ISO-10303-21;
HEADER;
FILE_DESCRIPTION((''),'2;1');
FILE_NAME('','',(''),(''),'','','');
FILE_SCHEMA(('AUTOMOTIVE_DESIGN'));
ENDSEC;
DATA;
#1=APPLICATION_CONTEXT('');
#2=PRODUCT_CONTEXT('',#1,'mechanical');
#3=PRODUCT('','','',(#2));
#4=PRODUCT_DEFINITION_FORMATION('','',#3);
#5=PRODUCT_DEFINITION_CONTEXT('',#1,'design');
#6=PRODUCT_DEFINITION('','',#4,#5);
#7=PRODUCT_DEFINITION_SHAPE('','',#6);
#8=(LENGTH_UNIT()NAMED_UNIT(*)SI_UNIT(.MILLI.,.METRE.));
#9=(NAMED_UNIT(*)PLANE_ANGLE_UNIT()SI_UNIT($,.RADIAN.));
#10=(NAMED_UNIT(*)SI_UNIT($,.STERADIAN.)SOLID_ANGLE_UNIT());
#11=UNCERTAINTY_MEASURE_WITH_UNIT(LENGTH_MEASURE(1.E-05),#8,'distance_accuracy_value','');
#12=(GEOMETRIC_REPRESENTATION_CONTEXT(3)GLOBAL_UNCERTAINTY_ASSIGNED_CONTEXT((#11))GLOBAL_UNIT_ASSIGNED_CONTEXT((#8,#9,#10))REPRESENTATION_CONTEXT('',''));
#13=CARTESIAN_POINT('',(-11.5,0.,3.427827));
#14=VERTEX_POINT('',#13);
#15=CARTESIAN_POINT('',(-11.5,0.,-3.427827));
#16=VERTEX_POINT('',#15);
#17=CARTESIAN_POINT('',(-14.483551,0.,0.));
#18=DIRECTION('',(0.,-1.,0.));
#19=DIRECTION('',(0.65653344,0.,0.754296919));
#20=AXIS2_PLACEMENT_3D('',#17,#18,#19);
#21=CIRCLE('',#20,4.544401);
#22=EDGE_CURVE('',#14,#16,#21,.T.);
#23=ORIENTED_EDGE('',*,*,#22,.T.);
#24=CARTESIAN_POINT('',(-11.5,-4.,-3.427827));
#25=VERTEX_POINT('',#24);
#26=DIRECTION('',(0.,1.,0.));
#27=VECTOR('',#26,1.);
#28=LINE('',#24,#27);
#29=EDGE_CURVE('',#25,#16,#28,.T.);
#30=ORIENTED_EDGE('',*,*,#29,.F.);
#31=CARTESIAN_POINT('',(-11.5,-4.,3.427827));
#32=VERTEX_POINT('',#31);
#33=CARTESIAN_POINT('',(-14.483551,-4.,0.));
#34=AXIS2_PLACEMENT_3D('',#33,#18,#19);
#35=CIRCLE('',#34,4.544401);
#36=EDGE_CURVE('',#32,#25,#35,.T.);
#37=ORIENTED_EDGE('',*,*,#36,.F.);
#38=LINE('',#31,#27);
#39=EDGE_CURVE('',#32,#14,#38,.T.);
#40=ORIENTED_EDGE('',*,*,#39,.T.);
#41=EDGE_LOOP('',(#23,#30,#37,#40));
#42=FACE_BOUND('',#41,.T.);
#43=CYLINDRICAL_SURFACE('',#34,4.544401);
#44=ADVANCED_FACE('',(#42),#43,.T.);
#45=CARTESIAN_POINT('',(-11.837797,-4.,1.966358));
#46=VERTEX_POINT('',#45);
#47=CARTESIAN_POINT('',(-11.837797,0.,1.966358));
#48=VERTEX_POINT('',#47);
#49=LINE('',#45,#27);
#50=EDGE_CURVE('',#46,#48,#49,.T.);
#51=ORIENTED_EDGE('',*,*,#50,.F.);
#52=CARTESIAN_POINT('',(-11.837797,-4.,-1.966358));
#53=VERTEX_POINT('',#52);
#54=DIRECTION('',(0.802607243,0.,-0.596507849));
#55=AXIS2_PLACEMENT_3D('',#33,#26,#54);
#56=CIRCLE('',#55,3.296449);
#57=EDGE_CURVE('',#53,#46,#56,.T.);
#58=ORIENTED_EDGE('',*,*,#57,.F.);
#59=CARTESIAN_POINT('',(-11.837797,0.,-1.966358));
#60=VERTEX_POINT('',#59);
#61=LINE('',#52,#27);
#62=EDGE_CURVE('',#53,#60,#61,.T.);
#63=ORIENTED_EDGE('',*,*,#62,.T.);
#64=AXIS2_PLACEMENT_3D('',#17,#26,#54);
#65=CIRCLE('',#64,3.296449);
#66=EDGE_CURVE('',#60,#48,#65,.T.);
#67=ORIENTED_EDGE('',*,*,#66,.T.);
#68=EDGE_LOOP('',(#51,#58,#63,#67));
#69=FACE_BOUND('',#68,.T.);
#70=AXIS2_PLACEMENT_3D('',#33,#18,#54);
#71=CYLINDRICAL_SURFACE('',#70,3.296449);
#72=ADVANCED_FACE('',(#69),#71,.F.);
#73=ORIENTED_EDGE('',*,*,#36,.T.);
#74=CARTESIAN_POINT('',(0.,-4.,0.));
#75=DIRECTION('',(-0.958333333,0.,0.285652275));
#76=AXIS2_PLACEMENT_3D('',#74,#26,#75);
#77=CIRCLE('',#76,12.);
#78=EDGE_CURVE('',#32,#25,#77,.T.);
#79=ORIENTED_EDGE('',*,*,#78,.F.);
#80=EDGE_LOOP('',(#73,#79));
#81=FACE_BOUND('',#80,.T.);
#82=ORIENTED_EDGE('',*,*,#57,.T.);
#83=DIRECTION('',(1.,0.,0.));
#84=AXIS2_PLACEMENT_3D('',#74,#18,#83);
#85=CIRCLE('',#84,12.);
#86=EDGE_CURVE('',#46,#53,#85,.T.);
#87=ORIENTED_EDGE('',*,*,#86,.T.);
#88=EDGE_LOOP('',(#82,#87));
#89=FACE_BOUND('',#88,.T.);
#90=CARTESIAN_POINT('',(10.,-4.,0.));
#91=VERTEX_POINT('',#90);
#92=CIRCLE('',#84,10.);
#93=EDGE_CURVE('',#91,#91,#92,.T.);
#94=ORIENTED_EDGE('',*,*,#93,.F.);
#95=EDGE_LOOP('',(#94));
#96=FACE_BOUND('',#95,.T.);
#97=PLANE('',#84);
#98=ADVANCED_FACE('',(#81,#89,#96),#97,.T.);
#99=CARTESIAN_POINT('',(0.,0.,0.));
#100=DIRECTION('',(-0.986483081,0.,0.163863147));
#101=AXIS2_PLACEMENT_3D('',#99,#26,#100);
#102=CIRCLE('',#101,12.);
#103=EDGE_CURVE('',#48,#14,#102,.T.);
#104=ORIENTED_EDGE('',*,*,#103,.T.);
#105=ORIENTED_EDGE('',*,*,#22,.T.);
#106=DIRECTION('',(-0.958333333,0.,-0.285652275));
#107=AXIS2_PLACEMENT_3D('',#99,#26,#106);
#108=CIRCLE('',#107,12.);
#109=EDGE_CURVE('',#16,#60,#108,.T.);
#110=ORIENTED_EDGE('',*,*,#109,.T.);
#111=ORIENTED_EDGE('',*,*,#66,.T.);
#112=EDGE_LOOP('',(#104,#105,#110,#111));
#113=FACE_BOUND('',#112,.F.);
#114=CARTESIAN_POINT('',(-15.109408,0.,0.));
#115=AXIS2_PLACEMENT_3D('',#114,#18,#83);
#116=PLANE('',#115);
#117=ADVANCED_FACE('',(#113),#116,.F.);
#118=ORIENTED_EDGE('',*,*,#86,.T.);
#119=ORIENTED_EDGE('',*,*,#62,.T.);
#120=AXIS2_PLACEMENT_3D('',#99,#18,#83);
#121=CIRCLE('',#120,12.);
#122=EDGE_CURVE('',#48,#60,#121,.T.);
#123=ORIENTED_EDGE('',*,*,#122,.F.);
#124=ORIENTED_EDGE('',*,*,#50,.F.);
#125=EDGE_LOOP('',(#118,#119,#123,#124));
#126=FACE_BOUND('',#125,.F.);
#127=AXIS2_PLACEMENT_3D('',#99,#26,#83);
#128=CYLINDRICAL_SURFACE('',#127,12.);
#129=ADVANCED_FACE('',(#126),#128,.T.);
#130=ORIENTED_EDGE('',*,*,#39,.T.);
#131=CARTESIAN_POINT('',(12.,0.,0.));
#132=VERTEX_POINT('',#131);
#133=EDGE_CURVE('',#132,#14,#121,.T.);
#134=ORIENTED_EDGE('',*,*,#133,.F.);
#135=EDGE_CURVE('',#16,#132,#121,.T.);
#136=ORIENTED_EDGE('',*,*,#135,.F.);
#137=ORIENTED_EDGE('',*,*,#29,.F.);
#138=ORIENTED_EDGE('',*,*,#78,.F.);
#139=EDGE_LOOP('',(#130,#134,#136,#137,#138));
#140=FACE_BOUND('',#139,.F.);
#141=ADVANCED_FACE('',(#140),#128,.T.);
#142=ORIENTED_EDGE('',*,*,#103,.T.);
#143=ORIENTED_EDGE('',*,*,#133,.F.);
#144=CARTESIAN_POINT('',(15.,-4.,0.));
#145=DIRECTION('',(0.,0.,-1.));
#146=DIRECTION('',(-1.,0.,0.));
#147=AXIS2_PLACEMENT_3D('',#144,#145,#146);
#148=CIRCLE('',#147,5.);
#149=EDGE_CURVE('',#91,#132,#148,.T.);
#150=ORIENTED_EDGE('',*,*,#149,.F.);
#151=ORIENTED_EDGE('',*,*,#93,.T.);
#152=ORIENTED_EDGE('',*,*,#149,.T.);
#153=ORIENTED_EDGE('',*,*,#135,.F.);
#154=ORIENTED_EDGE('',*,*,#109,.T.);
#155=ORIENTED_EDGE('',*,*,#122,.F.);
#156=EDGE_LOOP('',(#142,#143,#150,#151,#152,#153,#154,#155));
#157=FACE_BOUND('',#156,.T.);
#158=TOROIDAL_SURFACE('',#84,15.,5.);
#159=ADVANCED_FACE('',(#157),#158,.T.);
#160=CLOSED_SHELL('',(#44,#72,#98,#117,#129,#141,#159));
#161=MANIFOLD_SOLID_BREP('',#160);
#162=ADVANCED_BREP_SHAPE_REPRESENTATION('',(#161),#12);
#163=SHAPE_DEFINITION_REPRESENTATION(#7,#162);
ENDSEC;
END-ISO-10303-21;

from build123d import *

# Parameters (mm, degrees)
F1_R     = 12
F1_R_2   = 10
F2_DEPTH = 4
F5_DEPTH = 4


# Not quite as in the source:
# - a fillet or chamfer that OpenCascade refuses, or shapes differently, is made with other operations: its cross-section is extruded or revolved along the edge and cut away or added


with BuildPart() as f2:
    # F1 (on Front) → F2 (new body)
    with BuildSketch(Plane.XZ):
        Circle(F1_R)
        Circle(F1_R_2, mode=Mode.SUBTRACT)
    extrude(amount=F2_DEPTH)

    # F3: fillet of radius 5 on 1 edges, made by hand

    # F3_s1 → F3_t2 (revolve, cut)
    with BuildSketch(Plane.XY):
        with BuildLine():
            ThreePointArc((10, -4), (10.527864045, -1.7639320225), (12, 0))
            Line((12, 0), (10, 0))
            Line((10, 0), (10, -4))
        make_face()
    revolve(axis=Axis((0, 0, 0), (0, -1, 0)), mode=Mode.SUBTRACT)

    # F4 (on face) → F5 (join)
    with BuildSketch(Plane.XZ.offset(4)):
        with BuildLine():
            ThreePointArc((-11.8377969718, 1.9663577638), (-11.6917562913, 2.7023757741), (-11.5, 3.4278273002))
            ThreePointArc((-11.5, 3.4278273002), (-19.0279514026, 0), (-11.5, -3.4278273002))
            ThreePointArc((-11.5, -3.4278273002), (-11.6917562913, -2.7023757741), (-11.8377969718, -1.9663577638))
            ThreePointArc((-11.8377969718, -1.9663577638), (-17.78, 0), (-11.8377969718, 1.9663577638))
        make_face()
    extrude(amount=-F5_DEPTH)


solid = f2.part
